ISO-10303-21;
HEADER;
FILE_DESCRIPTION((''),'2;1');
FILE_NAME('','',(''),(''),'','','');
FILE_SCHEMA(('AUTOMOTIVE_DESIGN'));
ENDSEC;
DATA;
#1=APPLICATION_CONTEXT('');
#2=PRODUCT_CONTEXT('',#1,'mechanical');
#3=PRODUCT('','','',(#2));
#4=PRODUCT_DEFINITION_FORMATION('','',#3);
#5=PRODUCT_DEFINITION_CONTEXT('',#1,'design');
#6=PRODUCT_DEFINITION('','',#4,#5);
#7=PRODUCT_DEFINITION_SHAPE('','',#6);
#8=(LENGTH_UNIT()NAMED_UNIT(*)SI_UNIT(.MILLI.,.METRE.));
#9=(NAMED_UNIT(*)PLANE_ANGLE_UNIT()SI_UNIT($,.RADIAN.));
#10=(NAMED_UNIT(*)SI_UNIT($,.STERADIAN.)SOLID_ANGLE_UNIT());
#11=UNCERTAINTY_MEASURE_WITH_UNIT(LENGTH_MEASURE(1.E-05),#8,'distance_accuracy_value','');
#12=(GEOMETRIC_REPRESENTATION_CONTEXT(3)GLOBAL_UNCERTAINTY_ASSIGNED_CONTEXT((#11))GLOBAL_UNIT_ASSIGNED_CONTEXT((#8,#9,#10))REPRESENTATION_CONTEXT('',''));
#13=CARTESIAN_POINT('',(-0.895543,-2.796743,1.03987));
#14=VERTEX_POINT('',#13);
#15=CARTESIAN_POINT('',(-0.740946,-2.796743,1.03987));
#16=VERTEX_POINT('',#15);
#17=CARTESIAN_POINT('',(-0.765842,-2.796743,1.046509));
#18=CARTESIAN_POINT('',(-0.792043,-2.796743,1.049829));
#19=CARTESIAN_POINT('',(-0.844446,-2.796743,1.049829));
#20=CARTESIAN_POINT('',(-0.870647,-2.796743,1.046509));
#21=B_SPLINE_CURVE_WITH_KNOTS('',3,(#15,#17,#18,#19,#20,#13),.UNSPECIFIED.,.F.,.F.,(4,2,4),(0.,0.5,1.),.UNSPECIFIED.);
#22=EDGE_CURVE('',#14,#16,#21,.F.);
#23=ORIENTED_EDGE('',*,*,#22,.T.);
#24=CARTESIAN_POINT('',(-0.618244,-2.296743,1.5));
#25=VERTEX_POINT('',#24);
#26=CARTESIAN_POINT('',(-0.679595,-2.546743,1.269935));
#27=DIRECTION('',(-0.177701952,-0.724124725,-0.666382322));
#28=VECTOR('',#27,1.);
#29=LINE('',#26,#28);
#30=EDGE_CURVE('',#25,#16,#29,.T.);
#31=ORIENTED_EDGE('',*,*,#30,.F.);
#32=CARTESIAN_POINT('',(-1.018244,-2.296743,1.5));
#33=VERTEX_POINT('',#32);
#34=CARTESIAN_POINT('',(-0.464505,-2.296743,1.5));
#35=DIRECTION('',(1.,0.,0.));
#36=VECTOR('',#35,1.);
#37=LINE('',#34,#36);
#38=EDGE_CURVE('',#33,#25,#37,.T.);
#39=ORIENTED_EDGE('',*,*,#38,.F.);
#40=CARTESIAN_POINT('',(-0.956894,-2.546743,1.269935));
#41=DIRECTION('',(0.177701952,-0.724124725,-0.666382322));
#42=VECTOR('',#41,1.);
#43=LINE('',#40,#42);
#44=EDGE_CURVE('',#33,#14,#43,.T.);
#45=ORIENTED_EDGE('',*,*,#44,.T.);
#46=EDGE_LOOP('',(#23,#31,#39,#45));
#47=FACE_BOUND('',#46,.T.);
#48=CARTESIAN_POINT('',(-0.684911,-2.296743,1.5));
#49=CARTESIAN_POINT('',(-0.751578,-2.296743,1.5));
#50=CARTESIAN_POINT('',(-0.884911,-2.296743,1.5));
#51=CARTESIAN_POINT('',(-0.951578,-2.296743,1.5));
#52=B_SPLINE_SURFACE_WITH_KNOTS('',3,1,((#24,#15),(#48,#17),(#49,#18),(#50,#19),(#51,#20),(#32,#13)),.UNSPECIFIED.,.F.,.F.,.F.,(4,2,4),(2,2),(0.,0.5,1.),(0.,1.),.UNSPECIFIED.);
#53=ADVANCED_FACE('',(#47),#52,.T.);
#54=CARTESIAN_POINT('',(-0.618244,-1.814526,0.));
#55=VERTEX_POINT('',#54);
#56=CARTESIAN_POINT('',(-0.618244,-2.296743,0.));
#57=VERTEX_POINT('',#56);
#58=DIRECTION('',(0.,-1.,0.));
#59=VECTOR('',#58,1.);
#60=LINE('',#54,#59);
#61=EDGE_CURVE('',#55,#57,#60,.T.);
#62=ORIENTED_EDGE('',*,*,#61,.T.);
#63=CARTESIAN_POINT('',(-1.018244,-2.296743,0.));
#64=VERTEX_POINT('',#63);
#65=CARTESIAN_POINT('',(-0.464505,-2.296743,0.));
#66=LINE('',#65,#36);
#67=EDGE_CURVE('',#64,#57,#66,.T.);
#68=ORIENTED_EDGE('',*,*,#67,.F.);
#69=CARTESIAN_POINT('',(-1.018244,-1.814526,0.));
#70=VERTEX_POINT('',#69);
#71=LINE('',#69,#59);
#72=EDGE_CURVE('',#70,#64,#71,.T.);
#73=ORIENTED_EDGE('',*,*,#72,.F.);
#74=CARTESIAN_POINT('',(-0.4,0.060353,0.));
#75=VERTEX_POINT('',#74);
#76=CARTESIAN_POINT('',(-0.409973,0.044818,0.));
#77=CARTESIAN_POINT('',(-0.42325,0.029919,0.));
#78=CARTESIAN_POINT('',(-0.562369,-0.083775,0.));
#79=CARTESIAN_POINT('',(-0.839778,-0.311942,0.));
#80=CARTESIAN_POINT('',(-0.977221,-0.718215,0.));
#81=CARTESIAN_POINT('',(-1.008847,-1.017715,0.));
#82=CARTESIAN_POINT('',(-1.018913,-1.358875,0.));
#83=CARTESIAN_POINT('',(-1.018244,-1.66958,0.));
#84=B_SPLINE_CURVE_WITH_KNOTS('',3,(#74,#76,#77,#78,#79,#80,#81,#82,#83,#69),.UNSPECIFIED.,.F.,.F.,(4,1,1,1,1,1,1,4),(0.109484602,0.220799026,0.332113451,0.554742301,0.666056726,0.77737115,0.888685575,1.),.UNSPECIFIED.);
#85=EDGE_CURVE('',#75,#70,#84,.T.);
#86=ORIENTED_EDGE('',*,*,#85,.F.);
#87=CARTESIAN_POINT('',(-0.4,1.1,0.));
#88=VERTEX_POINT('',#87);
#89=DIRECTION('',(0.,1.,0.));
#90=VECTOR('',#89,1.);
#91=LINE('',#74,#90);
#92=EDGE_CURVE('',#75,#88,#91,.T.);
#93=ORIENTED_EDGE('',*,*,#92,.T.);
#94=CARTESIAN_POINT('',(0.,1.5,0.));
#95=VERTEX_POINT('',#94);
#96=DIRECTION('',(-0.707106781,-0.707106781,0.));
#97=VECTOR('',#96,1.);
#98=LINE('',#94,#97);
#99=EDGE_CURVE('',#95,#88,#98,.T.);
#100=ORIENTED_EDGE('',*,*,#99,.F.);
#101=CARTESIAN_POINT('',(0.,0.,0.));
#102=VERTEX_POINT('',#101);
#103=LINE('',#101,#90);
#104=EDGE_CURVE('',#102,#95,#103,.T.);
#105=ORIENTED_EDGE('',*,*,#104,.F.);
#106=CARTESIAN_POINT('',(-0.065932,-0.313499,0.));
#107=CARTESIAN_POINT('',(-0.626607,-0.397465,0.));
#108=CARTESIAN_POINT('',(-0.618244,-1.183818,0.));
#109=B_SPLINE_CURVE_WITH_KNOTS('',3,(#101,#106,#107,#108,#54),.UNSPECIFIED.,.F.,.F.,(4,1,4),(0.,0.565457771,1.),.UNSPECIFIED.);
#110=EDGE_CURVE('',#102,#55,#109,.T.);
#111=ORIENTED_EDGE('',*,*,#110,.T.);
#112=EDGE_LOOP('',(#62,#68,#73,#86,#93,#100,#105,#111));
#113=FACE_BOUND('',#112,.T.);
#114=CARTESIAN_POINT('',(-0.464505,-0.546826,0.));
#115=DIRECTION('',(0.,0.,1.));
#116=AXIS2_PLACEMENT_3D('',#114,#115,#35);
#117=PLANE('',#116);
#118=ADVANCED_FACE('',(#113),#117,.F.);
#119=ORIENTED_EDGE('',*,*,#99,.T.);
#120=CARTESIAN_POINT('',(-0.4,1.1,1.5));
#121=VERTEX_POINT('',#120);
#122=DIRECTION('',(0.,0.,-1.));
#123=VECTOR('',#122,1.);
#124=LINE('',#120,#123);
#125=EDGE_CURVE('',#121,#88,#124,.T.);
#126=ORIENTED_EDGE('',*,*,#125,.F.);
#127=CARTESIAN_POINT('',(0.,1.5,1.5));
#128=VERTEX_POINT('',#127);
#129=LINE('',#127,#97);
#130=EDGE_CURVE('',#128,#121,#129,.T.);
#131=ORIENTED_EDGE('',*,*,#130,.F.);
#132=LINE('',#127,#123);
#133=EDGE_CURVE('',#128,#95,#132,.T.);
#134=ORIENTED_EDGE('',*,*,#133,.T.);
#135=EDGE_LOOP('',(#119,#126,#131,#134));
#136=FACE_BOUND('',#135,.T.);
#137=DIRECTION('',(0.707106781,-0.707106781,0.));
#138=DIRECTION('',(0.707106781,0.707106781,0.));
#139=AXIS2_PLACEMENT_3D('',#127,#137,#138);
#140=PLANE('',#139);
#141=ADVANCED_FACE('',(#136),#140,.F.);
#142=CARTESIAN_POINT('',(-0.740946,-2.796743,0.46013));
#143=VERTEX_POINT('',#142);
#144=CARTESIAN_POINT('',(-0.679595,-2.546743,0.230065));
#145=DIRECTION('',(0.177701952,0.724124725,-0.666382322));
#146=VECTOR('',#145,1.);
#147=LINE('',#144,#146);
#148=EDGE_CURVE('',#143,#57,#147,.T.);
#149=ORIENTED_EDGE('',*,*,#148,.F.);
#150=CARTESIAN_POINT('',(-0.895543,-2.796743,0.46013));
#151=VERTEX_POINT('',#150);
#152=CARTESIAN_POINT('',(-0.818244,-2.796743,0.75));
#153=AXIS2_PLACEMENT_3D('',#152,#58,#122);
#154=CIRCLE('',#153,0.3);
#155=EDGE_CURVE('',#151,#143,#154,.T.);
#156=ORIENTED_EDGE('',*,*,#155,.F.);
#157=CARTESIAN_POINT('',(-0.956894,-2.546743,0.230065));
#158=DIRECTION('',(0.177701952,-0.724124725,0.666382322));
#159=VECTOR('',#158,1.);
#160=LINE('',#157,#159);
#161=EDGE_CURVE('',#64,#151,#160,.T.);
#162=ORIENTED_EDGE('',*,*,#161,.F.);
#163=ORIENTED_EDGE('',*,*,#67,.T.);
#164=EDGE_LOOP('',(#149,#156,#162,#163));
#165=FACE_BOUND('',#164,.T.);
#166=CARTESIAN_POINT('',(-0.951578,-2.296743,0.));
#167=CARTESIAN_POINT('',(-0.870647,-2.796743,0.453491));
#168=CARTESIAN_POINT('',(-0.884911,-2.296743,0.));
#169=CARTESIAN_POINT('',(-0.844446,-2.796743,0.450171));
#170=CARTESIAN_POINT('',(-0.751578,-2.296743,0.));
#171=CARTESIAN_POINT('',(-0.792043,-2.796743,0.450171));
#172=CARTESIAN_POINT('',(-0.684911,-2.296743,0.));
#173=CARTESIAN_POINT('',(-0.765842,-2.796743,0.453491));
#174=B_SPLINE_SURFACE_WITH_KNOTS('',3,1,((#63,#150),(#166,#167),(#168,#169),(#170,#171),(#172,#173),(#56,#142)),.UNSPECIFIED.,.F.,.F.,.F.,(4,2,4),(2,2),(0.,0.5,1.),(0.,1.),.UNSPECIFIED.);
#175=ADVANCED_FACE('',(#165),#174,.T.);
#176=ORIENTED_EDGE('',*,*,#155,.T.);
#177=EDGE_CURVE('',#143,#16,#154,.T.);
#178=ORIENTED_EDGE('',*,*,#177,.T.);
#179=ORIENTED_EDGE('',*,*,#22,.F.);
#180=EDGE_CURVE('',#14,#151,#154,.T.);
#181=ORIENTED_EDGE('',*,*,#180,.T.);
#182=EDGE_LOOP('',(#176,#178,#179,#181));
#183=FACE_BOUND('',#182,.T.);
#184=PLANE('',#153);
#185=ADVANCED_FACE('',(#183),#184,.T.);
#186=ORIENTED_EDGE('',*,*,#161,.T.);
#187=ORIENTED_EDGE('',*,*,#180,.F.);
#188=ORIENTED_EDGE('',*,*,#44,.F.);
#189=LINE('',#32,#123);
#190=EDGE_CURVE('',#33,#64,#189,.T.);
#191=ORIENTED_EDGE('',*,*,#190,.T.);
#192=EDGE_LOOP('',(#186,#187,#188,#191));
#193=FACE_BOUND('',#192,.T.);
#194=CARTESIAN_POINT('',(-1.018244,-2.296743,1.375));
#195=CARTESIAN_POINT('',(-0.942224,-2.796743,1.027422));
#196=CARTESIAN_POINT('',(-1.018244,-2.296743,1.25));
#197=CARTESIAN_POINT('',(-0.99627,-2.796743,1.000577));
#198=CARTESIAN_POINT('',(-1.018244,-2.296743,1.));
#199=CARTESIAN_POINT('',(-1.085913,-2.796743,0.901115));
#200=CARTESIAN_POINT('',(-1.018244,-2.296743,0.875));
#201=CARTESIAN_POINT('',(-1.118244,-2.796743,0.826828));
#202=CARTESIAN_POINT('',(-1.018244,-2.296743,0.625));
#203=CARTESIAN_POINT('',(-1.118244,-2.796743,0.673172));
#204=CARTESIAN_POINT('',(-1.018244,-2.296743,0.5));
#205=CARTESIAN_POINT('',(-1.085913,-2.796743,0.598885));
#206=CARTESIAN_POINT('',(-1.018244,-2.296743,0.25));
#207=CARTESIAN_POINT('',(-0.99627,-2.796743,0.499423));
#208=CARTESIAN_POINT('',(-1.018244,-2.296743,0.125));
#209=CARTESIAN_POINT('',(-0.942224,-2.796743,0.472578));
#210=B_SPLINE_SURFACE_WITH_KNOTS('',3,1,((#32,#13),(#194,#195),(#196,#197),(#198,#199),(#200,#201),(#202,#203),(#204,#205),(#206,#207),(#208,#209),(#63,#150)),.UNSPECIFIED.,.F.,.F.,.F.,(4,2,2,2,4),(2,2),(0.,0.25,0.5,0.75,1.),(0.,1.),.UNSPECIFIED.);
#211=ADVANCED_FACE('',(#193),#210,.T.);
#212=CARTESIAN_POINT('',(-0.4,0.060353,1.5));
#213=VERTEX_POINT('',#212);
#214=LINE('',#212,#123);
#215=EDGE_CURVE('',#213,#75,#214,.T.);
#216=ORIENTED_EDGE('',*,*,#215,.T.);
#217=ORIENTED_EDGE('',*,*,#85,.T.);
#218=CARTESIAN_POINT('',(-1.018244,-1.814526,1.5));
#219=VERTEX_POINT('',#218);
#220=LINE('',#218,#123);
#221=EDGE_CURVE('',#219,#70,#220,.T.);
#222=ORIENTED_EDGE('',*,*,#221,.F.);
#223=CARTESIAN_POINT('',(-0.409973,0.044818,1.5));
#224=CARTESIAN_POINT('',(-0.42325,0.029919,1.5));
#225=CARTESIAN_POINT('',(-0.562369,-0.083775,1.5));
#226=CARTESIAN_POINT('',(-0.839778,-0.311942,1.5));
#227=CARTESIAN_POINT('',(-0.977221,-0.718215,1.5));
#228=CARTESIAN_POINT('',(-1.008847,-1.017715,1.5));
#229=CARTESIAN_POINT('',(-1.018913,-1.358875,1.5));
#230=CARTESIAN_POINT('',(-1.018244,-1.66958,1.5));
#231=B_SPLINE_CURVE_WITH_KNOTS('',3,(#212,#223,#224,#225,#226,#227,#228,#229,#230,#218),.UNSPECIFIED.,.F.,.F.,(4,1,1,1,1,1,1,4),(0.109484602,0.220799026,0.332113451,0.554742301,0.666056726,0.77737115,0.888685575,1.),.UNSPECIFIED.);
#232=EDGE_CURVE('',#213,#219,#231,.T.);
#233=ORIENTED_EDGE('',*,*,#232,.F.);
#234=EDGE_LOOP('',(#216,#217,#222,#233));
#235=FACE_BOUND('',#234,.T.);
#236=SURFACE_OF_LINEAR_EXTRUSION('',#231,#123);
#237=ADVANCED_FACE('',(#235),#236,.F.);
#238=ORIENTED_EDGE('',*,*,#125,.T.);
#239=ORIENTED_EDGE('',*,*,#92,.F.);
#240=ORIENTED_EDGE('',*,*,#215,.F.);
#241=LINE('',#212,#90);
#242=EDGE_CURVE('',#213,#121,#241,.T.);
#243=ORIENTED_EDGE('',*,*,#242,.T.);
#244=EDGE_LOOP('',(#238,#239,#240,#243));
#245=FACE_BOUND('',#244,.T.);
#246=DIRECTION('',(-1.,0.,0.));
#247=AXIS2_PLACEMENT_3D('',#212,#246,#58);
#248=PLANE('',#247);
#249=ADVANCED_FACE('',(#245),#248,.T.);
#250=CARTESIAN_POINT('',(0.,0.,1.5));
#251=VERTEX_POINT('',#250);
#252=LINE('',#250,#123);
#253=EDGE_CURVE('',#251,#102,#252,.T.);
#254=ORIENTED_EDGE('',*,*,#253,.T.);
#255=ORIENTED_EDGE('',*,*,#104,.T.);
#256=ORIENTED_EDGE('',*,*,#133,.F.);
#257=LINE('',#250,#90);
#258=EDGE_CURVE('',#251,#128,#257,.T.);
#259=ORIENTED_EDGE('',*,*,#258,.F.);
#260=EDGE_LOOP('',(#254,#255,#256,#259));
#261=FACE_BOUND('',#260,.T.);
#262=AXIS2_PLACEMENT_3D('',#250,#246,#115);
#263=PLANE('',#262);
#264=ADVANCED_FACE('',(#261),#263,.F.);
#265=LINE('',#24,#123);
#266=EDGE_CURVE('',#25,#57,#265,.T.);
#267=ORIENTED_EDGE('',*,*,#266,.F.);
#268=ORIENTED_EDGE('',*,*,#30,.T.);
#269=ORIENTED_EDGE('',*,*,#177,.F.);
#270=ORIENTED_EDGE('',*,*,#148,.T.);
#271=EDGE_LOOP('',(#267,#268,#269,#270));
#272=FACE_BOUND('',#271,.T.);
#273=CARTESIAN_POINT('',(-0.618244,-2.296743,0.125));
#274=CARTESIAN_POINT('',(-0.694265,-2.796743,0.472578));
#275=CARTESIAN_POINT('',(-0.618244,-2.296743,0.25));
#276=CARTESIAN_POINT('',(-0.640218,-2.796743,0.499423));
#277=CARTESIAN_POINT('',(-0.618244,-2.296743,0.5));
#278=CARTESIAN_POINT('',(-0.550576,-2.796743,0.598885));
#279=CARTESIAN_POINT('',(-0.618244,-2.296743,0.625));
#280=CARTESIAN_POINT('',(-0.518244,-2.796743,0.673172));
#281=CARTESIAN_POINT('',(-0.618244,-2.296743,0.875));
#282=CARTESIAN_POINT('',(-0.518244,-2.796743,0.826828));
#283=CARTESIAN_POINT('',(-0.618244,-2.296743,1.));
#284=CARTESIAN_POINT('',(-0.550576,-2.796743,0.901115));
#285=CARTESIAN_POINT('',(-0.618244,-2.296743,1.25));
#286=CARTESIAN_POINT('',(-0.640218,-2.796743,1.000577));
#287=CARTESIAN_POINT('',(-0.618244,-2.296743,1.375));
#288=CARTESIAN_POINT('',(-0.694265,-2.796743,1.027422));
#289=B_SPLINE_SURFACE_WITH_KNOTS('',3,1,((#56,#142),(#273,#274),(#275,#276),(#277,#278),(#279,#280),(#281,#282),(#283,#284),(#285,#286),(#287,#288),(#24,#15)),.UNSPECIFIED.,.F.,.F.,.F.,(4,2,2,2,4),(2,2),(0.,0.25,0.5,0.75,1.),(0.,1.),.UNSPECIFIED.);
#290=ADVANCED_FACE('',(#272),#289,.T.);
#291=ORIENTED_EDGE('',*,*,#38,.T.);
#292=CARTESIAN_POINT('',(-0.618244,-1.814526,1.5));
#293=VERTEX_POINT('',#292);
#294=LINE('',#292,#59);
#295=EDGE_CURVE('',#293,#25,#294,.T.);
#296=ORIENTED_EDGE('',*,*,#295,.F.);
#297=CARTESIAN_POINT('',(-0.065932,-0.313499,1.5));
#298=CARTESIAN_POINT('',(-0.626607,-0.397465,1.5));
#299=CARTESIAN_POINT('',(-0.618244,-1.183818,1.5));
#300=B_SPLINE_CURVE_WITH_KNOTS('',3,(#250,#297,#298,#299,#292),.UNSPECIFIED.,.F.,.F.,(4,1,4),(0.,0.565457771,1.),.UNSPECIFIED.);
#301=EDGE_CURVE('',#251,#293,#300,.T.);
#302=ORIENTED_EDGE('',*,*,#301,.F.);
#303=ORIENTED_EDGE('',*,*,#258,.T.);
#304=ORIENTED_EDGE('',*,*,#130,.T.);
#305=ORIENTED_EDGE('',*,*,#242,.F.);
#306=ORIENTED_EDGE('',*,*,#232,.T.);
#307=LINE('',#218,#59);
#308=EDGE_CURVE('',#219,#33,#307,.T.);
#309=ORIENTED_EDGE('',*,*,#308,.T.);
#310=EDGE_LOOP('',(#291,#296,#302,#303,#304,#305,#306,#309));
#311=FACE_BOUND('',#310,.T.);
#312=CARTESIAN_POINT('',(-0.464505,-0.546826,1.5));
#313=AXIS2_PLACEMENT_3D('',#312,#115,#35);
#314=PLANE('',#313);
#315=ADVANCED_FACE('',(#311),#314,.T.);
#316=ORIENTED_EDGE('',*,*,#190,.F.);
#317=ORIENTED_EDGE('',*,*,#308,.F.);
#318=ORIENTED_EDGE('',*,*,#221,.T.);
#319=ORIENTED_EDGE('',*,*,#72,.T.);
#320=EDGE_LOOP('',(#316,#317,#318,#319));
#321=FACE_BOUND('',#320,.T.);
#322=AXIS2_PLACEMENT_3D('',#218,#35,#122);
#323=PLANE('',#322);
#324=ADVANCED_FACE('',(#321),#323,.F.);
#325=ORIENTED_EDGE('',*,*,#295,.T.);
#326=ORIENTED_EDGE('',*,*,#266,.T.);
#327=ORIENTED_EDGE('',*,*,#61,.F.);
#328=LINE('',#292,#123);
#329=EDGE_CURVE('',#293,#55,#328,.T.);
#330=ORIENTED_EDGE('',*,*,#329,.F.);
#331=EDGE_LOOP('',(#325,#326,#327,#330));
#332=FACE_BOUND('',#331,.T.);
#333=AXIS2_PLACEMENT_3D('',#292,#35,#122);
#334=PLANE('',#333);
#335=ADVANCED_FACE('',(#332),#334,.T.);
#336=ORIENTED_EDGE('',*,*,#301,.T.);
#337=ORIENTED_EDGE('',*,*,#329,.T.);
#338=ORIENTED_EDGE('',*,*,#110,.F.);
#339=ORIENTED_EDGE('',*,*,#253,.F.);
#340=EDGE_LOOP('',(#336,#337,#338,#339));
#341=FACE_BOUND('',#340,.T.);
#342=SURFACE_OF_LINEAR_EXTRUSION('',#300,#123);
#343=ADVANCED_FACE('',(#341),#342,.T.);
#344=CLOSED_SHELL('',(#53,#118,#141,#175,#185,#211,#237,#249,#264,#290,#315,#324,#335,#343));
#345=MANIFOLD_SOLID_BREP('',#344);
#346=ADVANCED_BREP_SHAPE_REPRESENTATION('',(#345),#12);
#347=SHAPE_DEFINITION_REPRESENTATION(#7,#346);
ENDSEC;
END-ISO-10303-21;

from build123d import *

# Parameters (mm, degrees)
BOSS_EXTRUDE1_DEPTH = 1.5


with BuildPart() as part:
    # Sketch1 → Boss-Extrude1 (new body)
    with BuildSketch(Plane.XY):
        with BuildLine():
            Line((0, 0), (0, 1.5))
            Line((0, 1.5), (-0.4, 1.1))
            Line((-0.4, 1.1), (-0.4, 0.060352875))
            add(Edge.make_bspline(
                [(-0.4, 0.060352875), (-0.409973476, 0.044817545), (-0.423249666, 0.029918985), (-0.562369374, -0.083774644), (-0.839777589, -0.311942138), (-0.977221281, -0.718214966), (-1.008847213, -1.017715193), (-1.018913005, -1.358874566), (-1.018244352, -1.669580342), (-1.018244352, -1.814525752)],
                knots=[0.109484602, 0.109484602, 0.109484602, 0.109484602, 0.220799026, 0.332113451, 0.554742301, 0.666056726, 0.77737115, 0.888685575, 1, 1, 1, 1], degree=3))
            Line((-1.018244352, -1.814525752), (-1.018244352, -2.296742603))
            Line((-1.018244352, -2.296742603), (-0.618244352, -2.296742603))
            Line((-0.618244352, -2.296742603), (-0.618244352, -1.814525752))
            add(Edge.make_bspline(
                [(0, 0), (-0.065932077, -0.313499234), (-0.626607024, -0.397465224), (-0.618244352, -1.183817849), (-0.618244352, -1.814525752)],
                knots=[0, 0, 0, 0, 0.565457771, 1, 1, 1, 1], degree=3))
        make_face()
    extrude(amount=BOSS_EXTRUDE1_DEPTH)

    # Loft1: read off the stored shape, not the designer's step
    # Loft1: loft between two sections, ruled curve by curve
    loft1_from = [
        Edge.make_bspline([(-0.618244352, -2.296742603, 0), (-0.618244352, -2.296742603, 0.125), (-0.618244352, -2.296742603, 0.25), (-0.618244352, -2.296742603, 0.5), (-0.618244352, -2.296742603, 0.625), (-0.618244352, -2.296742603, 0.875), (-0.618244352, -2.296742603, 1), (-0.618244352, -2.296742603, 1.25), (-0.618244352, -2.296742603, 1.375), (-0.618244352, -2.296742603, 1.5)], [0, 0, 0, 0, 0.25, 0.25, 0.5, 0.5, 0.75, 0.75, 1, 1, 1, 1], 3),
        Edge.make_bspline([(-0.618244352, -2.296742603, 1.5), (-0.684911019, -2.296742603, 1.5), (-0.751577685, -2.296742603, 1.5), (-0.884911019, -2.296742603, 1.5), (-0.951577685, -2.296742603, 1.5), (-1.018244352, -2.296742603, 1.5)], [0, 0, 0, 0, 0.5, 0.5, 1, 1, 1, 1], 3),
        Edge.make_bspline([(-1.018244352, -2.296742603, 0), (-0.951577685, -2.296742603, 0), (-0.884911019, -2.296742603, 0), (-0.751577685, -2.296742603, 0), (-0.684911019, -2.296742603, 0), (-0.618244352, -2.296742603, 0)], [0, 0, 0, 0, 0.5, 0.5, 1, 1, 1, 1], 3),
        Edge.make_bspline([(-1.018244352, -2.296742603, 1.5), (-1.018244352, -2.296742603, 1.375), (-1.018244352, -2.296742603, 1.25), (-1.018244352, -2.296742603, 1), (-1.018244352, -2.296742603, 0.875), (-1.018244352, -2.296742603, 0.625), (-1.018244352, -2.296742603, 0.5), (-1.018244352, -2.296742603, 0.25), (-1.018244352, -2.296742603, 0.125), (-1.018244352, -2.296742603, 0)], [0, 0, 0, 0, 0.25, 0.25, 0.5, 0.5, 0.75, 0.75, 1, 1, 1, 1], 3),
    ]
    loft1_to = [
        Edge.make_bspline([(-0.740945557, -2.796742603, 0.460129518), (-0.694265059, -2.796742603, 0.472577651), (-0.640218461, -2.796742603, 0.499422848), (-0.550575921, -2.796742603, 0.598885017), (-0.518244352, -2.796742603, 0.673172169), (-0.518244352, -2.796742603, 0.826827831), (-0.550575921, -2.796742603, 0.901114983), (-0.640218461, -2.796742603, 1.000577152), (-0.694265059, -2.796742603, 1.027422349), (-0.740945557, -2.796742603, 1.039870482)], [0, 0, 0, 0, 0.25, 0.25, 0.5, 0.5, 0.75, 0.75, 1, 1, 1, 1], 3),
        Edge.make_bspline([(-0.740945557, -2.796742603, 1.039870482), (-0.765841822, -2.796742603, 1.046509486), (-0.792043087, -2.796742603, 1.049828988), (-0.844445617, -2.796742603, 1.049828988), (-0.870646882, -2.796742603, 1.046509486), (-0.895543147, -2.796742603, 1.039870482)], [0, 0, 0, 0, 0.5, 0.5, 1, 1, 1, 1], 3),
        Edge.make_bspline([(-0.895543147, -2.796742603, 0.460129518), (-0.870646882, -2.796742603, 0.453490514), (-0.844445617, -2.796742603, 0.450171012), (-0.792043087, -2.796742603, 0.450171012), (-0.765841822, -2.796742603, 0.453490514), (-0.740945557, -2.796742603, 0.460129518)], [0, 0, 0, 0, 0.5, 0.5, 1, 1, 1, 1], 3),
        Edge.make_bspline([(-0.895543147, -2.796742603, 1.039870482), (-0.942223645, -2.796742603, 1.027422349), (-0.996270243, -2.796742603, 1.000577152), (-1.085912783, -2.796742603, 0.901114983), (-1.118244352, -2.796742603, 0.826827831), (-1.118244352, -2.796742603, 0.673172169), (-1.085912783, -2.796742603, 0.598885017), (-0.996270243, -2.796742603, 0.499422848), (-0.942223645, -2.796742603, 0.472577651), (-0.895543147, -2.796742603, 0.460129518)], [0, 0, 0, 0, 0.25, 0.25, 0.5, 0.5, 0.75, 0.75, 1, 1, 1, 1], 3),
    ]
    loft1 = Solid(Shell([*[Face.make_surface_from_curves(loft1_from[k], loft1_to[k]) for k in range(4)], Face(Wire(loft1_from)), Face(Wire(loft1_to))]))
    add(loft1)


solid = part.part
